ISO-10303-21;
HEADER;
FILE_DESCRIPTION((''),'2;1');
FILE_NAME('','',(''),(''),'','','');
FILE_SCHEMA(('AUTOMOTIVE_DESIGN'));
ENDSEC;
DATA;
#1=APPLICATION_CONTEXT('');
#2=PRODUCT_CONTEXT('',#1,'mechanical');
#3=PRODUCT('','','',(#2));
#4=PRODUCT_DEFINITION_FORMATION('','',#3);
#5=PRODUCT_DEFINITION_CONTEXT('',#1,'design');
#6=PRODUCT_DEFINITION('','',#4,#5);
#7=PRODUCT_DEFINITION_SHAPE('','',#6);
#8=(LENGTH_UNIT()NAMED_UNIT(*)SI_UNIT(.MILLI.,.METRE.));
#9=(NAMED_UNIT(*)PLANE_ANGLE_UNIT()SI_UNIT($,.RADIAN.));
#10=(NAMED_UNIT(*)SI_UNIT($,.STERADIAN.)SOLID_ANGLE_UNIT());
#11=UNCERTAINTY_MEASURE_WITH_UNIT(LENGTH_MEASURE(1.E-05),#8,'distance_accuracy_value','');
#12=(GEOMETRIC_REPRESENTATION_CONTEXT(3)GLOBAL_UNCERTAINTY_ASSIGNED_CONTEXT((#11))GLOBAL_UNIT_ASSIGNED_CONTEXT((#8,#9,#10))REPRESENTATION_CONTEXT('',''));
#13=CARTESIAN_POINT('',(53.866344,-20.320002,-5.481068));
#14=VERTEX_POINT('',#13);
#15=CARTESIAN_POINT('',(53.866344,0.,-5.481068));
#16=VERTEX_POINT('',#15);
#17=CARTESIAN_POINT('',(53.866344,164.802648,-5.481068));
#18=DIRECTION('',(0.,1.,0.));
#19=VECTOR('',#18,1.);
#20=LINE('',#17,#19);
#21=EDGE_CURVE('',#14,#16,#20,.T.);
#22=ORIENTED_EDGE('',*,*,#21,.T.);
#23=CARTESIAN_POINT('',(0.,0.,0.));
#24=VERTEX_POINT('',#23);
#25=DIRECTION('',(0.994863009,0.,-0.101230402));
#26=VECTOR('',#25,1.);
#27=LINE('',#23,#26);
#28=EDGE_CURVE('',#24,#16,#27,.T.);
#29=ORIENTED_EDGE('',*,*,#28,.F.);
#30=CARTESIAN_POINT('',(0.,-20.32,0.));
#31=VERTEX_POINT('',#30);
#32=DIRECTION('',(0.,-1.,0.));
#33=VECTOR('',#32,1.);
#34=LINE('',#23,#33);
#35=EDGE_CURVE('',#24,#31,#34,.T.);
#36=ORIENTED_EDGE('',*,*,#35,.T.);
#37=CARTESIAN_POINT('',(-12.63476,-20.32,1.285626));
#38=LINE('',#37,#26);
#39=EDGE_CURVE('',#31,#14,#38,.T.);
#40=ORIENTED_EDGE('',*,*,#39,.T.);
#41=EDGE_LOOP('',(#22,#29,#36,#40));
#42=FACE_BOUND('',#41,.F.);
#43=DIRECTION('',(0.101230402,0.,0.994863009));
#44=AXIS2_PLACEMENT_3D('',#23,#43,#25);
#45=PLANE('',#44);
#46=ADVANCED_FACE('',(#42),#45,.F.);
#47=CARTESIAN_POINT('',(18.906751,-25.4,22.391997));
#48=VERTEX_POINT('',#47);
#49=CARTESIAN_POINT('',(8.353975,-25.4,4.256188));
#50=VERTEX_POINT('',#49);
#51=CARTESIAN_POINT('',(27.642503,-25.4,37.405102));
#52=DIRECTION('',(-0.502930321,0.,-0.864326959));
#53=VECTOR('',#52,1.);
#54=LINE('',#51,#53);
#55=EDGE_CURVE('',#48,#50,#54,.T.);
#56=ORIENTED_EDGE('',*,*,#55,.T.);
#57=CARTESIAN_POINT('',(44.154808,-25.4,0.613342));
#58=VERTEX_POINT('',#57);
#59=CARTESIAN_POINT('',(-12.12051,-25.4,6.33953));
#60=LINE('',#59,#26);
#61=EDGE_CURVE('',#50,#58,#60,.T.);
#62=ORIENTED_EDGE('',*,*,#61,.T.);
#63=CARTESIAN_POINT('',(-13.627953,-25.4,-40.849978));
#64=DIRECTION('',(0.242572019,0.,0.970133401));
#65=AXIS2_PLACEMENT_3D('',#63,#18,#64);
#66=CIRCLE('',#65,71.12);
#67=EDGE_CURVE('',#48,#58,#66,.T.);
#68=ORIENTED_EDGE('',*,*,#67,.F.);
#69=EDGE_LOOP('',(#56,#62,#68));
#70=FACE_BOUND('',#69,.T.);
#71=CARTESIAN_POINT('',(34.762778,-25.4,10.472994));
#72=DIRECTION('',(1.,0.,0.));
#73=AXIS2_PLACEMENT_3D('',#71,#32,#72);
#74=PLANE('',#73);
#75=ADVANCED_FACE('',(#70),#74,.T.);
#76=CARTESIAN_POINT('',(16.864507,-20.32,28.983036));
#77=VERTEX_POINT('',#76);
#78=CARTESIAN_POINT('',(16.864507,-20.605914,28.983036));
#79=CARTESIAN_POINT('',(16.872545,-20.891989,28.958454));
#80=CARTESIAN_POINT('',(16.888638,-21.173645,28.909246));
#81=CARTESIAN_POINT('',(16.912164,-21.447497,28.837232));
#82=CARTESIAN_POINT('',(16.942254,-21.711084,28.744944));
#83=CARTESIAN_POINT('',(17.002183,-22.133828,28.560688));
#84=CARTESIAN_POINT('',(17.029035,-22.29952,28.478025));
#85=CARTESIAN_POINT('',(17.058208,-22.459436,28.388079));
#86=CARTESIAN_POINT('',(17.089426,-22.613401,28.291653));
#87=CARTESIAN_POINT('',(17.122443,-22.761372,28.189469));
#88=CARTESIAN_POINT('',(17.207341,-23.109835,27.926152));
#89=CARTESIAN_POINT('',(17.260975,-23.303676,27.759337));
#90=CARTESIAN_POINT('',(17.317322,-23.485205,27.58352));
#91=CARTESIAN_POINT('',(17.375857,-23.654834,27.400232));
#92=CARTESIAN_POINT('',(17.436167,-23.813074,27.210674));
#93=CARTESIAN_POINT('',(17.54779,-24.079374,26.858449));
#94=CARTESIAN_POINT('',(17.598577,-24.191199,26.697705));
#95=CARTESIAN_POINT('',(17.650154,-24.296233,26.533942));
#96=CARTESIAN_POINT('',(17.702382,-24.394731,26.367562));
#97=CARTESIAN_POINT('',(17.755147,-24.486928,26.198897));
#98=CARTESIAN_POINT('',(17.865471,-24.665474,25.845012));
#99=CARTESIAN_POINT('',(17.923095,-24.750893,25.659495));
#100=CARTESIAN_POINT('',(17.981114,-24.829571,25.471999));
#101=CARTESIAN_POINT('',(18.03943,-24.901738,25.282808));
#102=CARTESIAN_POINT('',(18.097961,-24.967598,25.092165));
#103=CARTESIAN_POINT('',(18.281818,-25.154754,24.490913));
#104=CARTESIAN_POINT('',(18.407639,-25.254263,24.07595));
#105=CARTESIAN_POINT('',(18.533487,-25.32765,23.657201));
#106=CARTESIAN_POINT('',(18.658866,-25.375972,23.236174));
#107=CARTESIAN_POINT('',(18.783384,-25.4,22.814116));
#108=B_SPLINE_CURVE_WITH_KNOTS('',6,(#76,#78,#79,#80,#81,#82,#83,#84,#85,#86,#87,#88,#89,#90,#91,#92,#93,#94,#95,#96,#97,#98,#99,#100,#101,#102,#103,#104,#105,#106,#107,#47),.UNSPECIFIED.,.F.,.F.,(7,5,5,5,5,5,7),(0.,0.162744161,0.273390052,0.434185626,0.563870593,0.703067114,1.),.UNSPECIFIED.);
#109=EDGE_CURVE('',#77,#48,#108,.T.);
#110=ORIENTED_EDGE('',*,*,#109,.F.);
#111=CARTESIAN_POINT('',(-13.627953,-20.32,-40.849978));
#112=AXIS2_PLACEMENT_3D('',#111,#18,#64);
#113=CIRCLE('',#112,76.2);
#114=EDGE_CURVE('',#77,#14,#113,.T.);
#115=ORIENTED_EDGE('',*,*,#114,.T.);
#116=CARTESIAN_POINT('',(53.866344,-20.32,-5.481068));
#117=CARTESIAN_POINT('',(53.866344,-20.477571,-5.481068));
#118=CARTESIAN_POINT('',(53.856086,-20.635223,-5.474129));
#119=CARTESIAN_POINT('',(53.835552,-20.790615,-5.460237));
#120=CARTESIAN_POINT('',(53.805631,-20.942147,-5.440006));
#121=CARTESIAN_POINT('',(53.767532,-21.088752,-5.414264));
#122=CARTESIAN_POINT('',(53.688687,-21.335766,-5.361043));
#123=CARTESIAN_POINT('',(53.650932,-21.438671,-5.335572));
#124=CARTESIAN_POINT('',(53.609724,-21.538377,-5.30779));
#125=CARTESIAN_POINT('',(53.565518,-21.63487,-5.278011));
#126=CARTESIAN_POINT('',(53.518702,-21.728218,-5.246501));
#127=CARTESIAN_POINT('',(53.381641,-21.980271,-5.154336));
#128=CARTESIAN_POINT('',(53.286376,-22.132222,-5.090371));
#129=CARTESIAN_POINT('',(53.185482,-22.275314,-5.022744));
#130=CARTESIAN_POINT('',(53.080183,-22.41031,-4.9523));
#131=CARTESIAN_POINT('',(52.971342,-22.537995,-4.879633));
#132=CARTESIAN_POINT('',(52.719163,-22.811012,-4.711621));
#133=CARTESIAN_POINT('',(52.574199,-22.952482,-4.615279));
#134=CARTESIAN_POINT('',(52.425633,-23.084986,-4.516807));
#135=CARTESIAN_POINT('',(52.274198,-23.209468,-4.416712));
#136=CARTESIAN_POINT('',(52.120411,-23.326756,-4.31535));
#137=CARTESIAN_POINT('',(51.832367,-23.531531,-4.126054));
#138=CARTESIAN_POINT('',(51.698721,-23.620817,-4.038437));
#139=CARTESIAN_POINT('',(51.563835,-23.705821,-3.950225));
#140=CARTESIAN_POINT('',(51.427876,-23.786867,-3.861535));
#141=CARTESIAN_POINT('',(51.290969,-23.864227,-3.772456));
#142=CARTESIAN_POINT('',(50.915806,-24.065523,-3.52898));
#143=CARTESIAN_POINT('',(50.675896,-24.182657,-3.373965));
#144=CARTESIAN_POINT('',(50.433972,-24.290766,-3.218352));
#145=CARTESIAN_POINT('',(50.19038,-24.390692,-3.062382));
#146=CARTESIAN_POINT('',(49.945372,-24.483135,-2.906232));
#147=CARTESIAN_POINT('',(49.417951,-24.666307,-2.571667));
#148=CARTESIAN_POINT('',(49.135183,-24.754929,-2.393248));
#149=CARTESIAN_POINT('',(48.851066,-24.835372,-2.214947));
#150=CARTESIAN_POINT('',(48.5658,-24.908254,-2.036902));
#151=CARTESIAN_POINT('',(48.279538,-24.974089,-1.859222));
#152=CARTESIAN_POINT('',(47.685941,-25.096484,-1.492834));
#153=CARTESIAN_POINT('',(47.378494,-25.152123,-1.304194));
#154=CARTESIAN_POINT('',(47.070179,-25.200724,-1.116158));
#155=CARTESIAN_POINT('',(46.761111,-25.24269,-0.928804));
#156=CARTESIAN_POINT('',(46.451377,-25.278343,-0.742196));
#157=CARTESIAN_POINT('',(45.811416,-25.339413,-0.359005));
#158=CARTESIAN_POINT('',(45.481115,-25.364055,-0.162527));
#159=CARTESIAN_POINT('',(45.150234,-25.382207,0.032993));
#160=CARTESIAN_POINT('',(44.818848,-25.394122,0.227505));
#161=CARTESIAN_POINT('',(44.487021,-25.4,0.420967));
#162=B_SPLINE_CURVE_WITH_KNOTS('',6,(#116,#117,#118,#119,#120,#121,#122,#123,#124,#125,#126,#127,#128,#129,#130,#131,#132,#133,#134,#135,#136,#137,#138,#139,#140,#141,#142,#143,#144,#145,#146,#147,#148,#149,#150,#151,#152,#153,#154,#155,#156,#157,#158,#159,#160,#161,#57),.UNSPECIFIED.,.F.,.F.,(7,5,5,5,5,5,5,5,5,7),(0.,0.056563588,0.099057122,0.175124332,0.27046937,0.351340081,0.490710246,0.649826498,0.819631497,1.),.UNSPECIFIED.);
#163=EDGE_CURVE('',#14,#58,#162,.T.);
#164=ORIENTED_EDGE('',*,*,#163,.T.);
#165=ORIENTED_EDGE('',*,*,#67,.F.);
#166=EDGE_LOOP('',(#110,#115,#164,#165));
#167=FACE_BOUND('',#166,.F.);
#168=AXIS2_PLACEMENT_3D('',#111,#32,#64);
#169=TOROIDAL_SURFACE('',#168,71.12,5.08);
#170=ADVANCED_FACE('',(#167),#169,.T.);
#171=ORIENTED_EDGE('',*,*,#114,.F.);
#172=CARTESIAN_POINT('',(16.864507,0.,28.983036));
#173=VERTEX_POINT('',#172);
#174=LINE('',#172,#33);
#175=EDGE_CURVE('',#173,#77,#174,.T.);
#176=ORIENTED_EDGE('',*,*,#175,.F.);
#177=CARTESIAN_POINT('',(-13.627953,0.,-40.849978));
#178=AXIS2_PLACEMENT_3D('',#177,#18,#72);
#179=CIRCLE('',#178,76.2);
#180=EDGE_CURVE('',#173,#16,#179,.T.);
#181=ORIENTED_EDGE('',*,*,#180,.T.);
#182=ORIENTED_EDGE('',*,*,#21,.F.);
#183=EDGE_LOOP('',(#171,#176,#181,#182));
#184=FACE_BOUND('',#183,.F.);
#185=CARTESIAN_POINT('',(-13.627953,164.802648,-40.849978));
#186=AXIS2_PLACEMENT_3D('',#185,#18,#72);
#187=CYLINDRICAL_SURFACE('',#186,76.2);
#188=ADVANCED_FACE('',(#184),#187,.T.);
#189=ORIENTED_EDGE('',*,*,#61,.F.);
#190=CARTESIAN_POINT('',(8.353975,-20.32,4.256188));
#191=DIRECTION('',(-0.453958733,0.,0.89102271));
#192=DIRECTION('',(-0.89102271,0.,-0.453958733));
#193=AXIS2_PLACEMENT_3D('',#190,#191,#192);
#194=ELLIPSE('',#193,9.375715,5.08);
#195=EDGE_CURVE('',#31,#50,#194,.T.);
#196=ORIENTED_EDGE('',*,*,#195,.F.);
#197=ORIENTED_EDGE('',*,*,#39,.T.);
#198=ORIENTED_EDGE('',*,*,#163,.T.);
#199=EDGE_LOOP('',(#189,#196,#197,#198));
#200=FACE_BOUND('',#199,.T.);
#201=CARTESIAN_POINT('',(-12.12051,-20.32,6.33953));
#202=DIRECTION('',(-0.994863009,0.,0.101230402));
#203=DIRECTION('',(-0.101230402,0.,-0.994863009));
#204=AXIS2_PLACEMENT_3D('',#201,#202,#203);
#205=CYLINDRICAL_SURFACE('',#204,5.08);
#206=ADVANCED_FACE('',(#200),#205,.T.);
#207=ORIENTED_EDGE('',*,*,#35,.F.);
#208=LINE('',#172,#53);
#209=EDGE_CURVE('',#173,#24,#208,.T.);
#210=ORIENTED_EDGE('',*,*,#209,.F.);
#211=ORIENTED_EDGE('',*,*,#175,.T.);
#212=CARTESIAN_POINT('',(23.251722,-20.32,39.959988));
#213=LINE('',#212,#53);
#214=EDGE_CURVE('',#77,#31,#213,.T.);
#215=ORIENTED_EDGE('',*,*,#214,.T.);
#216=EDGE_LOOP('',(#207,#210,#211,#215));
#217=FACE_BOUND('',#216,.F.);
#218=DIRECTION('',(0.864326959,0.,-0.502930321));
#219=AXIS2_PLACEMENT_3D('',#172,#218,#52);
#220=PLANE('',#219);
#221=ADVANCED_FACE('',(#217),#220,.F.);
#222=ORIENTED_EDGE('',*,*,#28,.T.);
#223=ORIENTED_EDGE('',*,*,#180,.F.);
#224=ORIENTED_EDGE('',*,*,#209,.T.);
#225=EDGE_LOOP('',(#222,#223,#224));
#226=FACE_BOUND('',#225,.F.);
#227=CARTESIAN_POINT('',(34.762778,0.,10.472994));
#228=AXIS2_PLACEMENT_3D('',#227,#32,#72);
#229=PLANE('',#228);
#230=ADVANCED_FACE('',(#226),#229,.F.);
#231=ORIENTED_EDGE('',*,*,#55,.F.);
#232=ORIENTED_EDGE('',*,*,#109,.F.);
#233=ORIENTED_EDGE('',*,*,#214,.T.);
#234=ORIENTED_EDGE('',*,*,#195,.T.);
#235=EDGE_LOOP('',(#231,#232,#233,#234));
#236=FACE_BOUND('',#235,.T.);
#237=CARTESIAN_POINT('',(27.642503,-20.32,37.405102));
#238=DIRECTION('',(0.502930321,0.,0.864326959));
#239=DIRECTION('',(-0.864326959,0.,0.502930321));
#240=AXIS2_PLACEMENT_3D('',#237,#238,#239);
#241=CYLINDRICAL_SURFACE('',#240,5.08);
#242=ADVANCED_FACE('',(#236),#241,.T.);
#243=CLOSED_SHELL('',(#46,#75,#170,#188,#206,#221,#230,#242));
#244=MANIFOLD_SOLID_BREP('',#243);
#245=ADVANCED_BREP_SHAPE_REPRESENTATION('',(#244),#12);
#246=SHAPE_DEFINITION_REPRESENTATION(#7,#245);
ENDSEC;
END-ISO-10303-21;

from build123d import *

# Parameters (mm, degrees)
F1_DEPTH    = 25.4
F2_T1_DEPTH = 355.0052962601
F3_T1_DEPTH = 79.5444841249
F3_T3_DEPTH = 58.9324911013
F3_T6_ANGLE = 57.8558117321


# Not quite as in the source:
# - a fillet or chamfer that OpenCascade refuses, or shapes differently, is made with other operations: its cross-section is extruded or revolved along the edge and cut away or added


with BuildPart() as f1:
    # F0 (on Front) → F1 (new body)
    with BuildSketch(Plane.XZ):
        Polygon((16.8645065278, 28.9830360562), (0, 0), (62.5720471144, -6.3669001684), (62.5720471144, 25.0710807741), align=None)
    extrude(amount=F1_DEPTH)

    # F2: fillet of radius 76.2 on 1 edges, made by hand

    # F2_s2 → F2_t1 (cut)
    with BuildSketch(Plane.XZ.offset(-164.8026481301)):
        with BuildLine():
            ThreePointArc((62.5720471144, -40.849978478), (50.1292639894, 0.8807930983), (16.8645065278, 28.9830360562))
            Line((16.8645065278, 28.9830360562), (62.5720471144, 25.0710807741))
            Line((62.5720471144, 25.0710807741), (62.5720471144, -40.849978478))
        make_face()
    extrude(amount=F2_T1_DEPTH, mode=Mode.SUBTRACT)

    # F3: fillet of radius 5.08 on 3 edges, made by hand

    # F3_s2 → F3_t1 (cut)
    with BuildSketch(Plane(origin=(-12.6347602087, 0, 1.2856261), x_dir=(0, 1, 0), z_dir=(0.9948630086, 0, -0.1012304016))):
        with BuildLine():
            ThreePointArc((-20.32, 0), (-23.9121024484, 1.4878975516), (-25.4, 5.08))
            Line((-25.4, 5.08), (-25.4, 0))
            Line((-25.4, 0), (-20.32, 0))
        make_face()
    extrude(amount=F3_T1_DEPTH, mode=Mode.SUBTRACT)

    # F3_s4 → F3_t3 (cut)
    with BuildSketch(Plane(origin=(23.2517216099, 0, 39.9599884335), x_dir=(0, 1, 0), z_dir=(-0.5029303214, 0, -0.8643269588))):
        with BuildLine():
            ThreePointArc((-20.32, 0), (-23.9121024484, 1.4878975516), (-25.4, 5.08))
            Line((-25.4, 5.08), (-25.4, 0))
            Line((-25.4, 0), (-20.32, 0))
        make_face()
    extrude(amount=F3_T3_DEPTH, mode=Mode.SUBTRACT)

    # F3_s5 → F3_t6 (revolve, cut)
    with BuildSketch(Plane(origin=(-3.2129562092, 0, 0.8033671188), x_dir=(0, 1, 0), z_dir=(-0.9701334009, 0, 0.2425720192))):
        with BuildLine():
            ThreePointArc((-20.32, -33.2643114045), (-23.9121024484, -31.776413853), (-25.4, -28.1843114045))
            Line((-25.4, -28.1843114045), (-25.4, -33.2643114045))
            Line((-25.4, -33.2643114045), (-20.32, -33.2643114045))
        make_face()
    revolve(axis=Axis((-13.6279528859, -25.4, -40.8499784781), (0, 1, 0)), revolution_arc=F3_T6_ANGLE, mode=Mode.SUBTRACT)


solid = f1.part
